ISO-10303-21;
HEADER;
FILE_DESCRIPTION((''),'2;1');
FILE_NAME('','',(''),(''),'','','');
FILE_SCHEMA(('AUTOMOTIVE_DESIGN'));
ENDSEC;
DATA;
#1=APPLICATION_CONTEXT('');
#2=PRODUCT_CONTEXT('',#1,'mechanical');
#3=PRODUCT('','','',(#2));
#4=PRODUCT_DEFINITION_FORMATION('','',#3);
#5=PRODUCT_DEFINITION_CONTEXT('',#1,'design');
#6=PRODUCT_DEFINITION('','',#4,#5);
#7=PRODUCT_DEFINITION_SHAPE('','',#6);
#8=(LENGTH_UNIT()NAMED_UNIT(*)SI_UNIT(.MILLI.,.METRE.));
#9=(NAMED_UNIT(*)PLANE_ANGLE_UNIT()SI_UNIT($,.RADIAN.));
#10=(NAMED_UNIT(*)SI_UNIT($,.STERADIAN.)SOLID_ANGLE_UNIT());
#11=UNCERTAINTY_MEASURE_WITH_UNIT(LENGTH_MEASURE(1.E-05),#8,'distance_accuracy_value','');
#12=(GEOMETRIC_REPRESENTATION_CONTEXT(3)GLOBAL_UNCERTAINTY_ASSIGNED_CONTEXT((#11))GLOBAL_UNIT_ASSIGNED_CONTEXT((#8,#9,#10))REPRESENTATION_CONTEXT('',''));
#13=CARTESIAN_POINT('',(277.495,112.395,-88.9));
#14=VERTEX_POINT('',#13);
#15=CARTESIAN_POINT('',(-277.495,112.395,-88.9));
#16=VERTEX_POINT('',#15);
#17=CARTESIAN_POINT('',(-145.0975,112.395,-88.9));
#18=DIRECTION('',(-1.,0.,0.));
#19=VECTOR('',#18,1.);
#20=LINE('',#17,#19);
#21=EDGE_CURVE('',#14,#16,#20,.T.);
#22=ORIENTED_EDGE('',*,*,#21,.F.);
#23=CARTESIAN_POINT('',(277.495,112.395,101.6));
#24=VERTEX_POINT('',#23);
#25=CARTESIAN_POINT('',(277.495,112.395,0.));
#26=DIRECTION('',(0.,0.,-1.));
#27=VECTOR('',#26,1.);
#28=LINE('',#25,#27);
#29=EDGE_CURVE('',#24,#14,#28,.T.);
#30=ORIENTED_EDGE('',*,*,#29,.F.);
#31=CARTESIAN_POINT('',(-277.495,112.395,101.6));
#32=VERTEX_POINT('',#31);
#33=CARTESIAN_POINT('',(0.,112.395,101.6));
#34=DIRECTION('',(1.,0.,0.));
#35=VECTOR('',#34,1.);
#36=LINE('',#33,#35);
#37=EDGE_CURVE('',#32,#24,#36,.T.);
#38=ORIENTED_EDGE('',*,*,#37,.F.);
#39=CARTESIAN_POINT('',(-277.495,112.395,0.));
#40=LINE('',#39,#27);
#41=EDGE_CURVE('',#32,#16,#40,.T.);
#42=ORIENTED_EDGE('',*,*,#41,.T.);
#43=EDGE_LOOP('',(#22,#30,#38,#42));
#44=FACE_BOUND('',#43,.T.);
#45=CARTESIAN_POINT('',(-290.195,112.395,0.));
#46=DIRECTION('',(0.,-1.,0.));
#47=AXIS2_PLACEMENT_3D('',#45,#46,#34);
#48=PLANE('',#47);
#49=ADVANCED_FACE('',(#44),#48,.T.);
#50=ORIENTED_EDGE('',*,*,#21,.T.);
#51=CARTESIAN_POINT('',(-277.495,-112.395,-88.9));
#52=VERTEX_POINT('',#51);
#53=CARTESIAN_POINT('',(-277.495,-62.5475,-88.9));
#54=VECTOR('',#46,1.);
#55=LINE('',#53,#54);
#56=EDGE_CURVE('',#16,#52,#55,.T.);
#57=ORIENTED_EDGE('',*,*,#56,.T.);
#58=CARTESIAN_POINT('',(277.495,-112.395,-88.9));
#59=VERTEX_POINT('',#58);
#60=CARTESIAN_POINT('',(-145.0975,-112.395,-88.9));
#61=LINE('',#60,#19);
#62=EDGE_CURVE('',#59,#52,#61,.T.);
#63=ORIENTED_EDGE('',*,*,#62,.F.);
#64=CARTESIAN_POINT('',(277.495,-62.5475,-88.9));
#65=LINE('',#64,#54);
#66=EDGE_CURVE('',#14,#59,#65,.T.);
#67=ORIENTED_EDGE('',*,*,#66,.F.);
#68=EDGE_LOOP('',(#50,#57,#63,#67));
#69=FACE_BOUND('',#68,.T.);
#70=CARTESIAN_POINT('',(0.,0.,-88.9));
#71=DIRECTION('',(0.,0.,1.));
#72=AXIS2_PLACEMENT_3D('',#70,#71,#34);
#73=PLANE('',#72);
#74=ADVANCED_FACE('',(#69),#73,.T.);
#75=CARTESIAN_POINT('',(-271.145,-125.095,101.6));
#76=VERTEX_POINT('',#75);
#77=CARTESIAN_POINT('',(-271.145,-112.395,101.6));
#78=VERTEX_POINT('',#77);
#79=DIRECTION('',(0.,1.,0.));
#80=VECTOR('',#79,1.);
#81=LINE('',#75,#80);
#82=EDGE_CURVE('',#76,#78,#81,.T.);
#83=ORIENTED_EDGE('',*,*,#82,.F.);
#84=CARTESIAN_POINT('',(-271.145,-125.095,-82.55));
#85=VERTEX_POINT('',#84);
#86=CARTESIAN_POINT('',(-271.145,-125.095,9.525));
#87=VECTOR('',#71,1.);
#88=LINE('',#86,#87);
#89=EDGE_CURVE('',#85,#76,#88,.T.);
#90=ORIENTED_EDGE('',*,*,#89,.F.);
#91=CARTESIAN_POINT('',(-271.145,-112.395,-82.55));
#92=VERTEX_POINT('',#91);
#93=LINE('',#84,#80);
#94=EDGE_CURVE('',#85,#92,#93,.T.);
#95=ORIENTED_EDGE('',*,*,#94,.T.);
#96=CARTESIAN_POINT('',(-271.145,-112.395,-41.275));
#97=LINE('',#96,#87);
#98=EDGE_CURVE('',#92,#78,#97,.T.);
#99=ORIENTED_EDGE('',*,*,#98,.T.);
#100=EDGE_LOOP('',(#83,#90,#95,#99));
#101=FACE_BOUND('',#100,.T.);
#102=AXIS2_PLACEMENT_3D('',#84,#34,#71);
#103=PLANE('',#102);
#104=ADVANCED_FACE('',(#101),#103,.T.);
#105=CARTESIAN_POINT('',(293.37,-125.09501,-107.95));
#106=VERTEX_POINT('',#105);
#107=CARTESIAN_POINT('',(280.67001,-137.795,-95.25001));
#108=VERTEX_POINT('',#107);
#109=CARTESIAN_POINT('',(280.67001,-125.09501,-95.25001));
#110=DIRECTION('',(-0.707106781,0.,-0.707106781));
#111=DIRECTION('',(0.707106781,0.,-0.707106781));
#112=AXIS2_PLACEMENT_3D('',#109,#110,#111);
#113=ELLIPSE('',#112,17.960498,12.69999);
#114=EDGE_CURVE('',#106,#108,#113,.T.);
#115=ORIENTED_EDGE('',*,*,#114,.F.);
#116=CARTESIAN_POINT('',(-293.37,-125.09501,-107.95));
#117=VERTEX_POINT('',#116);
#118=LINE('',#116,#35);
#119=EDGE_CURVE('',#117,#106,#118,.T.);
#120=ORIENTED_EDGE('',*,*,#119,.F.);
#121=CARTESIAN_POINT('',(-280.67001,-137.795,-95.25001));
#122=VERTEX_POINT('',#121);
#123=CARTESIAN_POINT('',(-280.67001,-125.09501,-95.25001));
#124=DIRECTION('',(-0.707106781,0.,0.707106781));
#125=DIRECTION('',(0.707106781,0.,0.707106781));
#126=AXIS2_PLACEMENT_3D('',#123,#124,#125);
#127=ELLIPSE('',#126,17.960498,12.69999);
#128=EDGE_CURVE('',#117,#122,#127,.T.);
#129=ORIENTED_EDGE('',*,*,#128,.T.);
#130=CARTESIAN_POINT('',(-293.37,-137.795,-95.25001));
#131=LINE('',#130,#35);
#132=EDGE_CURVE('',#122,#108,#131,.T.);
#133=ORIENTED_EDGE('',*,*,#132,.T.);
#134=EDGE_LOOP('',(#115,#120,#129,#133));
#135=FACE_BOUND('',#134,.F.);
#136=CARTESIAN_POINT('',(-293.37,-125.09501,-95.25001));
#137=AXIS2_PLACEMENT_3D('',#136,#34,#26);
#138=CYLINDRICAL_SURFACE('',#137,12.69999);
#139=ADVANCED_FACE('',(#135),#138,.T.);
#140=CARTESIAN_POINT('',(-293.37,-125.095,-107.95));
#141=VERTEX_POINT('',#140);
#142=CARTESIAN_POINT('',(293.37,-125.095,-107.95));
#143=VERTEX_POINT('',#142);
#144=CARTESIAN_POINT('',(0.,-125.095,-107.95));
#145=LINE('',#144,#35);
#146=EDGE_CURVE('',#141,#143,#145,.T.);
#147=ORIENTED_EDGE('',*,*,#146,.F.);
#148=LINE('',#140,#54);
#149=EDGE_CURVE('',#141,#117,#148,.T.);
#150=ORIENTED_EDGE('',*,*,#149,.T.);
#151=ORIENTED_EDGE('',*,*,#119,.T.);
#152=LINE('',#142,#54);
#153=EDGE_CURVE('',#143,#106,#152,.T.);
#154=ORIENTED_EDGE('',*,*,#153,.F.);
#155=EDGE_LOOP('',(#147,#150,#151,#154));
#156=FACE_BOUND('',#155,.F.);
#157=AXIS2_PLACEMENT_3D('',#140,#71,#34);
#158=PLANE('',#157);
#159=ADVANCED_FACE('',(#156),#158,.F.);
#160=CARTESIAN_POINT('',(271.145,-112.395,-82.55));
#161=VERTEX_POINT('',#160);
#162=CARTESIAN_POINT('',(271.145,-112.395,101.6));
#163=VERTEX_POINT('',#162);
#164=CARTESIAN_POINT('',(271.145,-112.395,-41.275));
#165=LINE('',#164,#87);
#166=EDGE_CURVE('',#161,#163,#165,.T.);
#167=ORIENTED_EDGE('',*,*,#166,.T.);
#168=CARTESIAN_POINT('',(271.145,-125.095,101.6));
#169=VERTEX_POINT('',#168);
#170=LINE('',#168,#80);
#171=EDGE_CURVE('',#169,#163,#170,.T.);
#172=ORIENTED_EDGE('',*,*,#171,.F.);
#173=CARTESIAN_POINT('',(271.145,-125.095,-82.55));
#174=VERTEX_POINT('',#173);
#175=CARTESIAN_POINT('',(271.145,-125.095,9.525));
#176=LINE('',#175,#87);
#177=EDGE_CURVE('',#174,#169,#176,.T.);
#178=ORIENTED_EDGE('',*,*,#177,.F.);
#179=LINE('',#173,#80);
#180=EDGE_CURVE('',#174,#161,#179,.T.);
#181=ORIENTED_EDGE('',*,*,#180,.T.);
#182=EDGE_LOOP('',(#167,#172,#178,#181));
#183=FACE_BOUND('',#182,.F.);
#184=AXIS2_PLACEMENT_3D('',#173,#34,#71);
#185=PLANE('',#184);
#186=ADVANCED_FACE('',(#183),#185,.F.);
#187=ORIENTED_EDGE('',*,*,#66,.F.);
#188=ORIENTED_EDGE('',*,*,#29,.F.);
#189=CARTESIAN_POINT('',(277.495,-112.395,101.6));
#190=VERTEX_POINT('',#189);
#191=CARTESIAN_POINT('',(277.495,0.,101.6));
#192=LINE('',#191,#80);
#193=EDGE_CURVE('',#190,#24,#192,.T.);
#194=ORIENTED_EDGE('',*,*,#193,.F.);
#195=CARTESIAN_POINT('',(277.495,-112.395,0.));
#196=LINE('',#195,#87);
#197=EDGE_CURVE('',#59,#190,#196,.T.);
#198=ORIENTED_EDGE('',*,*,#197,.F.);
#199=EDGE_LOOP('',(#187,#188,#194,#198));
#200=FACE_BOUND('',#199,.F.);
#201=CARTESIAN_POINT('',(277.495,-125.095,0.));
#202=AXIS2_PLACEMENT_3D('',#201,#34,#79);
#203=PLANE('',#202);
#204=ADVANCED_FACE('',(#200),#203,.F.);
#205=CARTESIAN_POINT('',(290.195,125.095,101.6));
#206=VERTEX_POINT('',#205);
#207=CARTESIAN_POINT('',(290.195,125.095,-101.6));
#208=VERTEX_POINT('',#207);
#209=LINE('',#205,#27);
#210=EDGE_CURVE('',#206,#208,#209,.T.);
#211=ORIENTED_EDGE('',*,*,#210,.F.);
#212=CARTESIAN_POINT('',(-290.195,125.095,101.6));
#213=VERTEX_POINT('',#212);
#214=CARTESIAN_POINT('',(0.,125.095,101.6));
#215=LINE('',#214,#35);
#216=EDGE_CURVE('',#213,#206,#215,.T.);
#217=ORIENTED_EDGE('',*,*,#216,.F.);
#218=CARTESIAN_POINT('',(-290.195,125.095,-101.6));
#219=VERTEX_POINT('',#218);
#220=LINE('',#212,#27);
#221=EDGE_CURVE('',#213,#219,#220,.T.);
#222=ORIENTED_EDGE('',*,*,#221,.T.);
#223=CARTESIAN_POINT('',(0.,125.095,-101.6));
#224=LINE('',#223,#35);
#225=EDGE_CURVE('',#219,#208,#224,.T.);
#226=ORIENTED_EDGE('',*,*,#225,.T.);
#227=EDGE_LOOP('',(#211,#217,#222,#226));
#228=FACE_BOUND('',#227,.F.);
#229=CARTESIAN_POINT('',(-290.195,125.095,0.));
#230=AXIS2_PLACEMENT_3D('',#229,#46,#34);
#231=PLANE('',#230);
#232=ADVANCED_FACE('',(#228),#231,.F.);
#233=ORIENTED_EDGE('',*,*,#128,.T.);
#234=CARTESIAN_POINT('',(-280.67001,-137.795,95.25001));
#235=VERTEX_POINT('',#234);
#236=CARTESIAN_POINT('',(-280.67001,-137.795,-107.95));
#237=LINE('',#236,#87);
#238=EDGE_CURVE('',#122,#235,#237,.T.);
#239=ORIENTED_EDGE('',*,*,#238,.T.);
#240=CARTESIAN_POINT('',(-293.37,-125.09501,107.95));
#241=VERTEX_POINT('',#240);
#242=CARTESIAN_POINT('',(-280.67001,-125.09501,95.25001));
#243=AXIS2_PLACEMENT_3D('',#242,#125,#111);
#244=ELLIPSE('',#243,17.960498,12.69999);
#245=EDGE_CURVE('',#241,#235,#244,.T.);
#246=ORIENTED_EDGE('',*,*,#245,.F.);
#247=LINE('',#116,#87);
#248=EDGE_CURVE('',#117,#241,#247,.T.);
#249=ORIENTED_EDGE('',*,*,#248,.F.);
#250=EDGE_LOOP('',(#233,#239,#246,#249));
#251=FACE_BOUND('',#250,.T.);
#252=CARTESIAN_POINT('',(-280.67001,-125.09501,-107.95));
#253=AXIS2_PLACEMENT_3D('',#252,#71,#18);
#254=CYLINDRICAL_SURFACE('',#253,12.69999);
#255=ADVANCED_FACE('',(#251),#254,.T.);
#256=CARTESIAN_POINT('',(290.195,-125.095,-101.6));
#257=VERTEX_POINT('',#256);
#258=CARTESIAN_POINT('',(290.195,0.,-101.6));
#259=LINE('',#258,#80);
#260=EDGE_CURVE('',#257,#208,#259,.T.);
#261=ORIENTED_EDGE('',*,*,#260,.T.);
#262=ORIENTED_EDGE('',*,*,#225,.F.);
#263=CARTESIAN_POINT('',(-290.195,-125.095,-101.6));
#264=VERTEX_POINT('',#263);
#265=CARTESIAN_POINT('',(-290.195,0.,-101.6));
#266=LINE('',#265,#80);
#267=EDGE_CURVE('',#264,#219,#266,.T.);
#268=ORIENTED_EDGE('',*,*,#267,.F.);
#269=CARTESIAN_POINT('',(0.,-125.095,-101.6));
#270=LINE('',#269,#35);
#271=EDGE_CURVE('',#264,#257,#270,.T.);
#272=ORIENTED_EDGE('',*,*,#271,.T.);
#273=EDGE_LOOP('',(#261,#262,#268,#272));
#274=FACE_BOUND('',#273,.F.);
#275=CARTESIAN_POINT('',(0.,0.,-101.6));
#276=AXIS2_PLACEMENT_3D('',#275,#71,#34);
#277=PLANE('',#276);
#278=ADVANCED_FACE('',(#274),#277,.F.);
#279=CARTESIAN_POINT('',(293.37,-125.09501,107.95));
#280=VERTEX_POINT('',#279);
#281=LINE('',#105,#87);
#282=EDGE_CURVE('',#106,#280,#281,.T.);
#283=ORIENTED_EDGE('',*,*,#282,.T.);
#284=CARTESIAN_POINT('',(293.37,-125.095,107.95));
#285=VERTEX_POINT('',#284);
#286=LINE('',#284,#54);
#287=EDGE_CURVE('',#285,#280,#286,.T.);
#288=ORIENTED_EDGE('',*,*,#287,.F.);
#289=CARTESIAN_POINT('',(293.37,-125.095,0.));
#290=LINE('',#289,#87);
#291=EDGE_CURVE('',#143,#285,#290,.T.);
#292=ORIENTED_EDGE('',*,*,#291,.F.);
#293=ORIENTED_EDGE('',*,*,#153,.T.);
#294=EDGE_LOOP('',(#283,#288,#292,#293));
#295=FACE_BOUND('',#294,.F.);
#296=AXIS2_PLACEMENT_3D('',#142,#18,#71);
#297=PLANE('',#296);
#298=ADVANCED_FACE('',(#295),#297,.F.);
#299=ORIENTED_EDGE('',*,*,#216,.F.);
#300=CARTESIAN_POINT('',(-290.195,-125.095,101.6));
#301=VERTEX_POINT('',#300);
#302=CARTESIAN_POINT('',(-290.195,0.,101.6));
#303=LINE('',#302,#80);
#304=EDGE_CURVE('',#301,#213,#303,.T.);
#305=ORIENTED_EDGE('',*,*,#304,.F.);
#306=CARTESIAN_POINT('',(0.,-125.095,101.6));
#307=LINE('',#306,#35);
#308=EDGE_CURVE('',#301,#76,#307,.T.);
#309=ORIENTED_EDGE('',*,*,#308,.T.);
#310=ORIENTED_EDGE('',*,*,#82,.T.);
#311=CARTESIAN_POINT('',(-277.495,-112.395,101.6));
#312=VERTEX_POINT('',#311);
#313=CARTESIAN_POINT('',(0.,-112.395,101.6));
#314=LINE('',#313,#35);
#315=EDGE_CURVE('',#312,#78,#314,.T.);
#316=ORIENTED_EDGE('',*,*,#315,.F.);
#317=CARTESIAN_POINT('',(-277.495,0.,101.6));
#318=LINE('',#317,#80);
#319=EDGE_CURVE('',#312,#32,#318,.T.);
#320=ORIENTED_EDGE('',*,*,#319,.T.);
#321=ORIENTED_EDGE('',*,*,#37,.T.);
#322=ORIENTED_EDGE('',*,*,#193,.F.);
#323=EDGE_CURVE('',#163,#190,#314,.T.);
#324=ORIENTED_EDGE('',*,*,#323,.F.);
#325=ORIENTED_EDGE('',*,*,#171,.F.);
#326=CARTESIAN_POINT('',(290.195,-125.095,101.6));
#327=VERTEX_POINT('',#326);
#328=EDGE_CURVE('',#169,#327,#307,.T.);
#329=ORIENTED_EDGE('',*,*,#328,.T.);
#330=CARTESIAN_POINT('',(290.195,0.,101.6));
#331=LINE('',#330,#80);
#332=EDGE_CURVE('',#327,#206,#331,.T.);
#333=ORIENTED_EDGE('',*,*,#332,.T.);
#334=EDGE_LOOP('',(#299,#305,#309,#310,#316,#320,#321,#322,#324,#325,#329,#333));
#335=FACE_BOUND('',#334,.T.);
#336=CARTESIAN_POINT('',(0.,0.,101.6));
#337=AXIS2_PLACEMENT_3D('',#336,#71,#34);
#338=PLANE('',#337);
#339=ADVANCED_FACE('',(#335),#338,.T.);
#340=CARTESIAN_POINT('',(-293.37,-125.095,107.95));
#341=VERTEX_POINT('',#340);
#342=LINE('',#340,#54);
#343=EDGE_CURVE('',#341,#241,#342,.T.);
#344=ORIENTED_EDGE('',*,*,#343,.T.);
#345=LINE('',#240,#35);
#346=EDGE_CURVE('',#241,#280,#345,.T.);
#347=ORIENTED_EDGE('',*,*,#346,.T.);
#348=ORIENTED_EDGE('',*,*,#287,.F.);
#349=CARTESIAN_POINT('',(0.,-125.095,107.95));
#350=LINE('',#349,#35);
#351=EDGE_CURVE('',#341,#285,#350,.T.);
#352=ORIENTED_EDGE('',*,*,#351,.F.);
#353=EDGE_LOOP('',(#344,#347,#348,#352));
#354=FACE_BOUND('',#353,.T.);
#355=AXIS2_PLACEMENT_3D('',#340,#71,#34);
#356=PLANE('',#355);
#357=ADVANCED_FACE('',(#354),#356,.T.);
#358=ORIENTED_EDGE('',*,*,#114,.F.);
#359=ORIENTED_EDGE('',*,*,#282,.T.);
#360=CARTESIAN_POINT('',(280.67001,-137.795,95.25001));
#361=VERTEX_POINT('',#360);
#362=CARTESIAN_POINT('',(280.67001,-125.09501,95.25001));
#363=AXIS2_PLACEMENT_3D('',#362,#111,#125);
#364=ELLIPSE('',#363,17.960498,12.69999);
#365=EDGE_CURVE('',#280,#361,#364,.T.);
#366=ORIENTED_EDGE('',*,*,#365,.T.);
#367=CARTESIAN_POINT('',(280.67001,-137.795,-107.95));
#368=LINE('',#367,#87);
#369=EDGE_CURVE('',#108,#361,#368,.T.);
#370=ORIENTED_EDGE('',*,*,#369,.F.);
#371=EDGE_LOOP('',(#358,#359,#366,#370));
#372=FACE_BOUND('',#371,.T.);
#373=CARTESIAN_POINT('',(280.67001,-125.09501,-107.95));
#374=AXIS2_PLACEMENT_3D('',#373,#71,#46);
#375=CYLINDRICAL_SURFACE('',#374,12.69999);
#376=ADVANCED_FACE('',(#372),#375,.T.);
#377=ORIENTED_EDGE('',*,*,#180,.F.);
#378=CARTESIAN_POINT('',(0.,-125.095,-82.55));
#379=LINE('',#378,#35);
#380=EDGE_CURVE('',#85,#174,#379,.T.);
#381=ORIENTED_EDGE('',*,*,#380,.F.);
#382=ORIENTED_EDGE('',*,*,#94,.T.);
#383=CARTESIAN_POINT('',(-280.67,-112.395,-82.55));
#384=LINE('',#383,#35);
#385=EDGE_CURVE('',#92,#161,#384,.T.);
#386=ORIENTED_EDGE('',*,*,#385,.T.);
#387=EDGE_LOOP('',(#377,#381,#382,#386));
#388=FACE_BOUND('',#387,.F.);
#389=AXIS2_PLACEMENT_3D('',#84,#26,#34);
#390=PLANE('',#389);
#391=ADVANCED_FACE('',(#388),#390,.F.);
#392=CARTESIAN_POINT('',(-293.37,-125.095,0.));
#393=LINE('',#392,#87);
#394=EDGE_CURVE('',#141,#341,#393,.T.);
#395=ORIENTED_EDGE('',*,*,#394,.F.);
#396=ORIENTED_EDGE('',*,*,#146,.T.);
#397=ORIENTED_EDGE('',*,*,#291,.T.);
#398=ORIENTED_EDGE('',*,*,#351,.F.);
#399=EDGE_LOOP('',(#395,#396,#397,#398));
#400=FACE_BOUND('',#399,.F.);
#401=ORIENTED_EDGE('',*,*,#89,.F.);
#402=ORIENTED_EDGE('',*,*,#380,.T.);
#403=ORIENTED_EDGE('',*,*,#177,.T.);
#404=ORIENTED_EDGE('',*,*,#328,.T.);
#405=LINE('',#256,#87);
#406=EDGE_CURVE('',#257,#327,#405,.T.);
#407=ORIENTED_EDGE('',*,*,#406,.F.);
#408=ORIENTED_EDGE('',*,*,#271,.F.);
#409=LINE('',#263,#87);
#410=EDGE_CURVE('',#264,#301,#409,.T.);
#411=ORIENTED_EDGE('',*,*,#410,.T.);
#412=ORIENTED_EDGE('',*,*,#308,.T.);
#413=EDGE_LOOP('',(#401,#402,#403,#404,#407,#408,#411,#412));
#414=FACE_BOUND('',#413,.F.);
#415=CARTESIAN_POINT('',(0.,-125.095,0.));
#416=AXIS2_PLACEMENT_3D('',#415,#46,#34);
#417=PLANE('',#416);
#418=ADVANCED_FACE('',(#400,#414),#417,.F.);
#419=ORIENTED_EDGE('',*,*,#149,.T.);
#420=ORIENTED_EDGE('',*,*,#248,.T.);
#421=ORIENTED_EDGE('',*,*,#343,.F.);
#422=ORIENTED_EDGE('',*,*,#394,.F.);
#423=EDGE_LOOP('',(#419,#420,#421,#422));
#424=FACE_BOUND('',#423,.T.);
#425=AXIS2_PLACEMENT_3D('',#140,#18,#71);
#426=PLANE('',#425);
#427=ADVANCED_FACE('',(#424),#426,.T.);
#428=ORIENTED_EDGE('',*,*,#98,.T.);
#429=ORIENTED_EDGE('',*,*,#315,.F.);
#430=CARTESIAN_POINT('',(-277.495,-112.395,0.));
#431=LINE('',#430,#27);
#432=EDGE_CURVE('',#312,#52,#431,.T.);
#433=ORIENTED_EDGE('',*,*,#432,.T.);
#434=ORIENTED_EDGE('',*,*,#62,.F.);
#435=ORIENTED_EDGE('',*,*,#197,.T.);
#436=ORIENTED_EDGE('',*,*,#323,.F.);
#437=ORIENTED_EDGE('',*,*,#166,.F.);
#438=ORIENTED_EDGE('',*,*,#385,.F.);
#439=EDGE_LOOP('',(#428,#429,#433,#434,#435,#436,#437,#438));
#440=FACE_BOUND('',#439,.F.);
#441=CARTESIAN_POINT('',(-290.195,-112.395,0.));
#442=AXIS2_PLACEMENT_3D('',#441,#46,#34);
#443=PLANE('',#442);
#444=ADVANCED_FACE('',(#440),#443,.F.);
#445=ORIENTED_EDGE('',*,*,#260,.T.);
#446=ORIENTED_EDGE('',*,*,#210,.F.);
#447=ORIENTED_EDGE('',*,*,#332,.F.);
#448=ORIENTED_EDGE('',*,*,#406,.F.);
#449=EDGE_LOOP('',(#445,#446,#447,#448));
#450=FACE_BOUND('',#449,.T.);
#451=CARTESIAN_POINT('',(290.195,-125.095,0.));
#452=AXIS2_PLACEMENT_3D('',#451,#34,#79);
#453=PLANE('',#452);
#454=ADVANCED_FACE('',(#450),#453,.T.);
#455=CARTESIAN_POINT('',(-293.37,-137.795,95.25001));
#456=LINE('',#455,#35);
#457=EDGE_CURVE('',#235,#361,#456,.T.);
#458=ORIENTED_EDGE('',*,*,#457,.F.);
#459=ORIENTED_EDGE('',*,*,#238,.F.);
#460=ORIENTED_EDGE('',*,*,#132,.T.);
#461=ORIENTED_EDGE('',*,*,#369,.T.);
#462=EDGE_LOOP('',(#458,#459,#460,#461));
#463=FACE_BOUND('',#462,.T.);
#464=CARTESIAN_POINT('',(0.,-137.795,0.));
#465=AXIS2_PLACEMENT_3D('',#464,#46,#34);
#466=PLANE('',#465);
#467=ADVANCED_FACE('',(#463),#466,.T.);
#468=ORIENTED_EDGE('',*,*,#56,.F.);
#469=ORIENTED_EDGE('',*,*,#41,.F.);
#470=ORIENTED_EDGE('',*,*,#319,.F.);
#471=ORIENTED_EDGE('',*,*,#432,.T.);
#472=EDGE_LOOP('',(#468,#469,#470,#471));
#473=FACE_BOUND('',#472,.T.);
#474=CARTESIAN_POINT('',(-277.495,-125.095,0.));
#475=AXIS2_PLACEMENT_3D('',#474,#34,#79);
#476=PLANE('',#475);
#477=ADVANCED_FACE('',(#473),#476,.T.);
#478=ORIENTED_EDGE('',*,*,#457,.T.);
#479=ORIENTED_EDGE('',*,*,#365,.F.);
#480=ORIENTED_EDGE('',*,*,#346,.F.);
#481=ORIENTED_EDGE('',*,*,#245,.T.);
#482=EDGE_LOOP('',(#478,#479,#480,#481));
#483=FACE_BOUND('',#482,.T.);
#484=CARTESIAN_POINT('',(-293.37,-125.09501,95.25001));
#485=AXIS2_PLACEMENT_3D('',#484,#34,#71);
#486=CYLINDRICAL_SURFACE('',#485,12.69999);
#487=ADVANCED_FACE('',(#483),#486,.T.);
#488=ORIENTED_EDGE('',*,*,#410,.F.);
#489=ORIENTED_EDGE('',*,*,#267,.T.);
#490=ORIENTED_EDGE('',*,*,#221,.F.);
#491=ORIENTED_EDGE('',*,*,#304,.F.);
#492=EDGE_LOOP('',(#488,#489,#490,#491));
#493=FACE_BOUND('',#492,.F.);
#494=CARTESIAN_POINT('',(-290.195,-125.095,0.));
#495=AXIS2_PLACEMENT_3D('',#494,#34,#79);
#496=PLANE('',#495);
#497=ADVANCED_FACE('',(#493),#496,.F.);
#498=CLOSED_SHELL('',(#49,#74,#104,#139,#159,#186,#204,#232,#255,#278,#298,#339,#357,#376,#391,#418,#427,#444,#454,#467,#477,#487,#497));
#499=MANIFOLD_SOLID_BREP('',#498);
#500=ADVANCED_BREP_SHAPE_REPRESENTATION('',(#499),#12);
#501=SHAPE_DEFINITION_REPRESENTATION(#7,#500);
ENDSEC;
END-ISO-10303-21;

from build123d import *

# Parameters (mm, degrees)
F0_W     = 580.39
F0_H     = 250.19
F1_DEPTH = 101.6
F2_T     = -12.7
F3_W     = 542.29
F3_H     = 184.15
F4_DEPTH = 25.4
F5_W     = 586.74
F5_H     = 215.9
F6_DEPTH = 12.7
F7_R     = 12.69999


# Not quite as in the source:
# - a fillet or chamfer is up to 0.001 mm smaller than in the source, because OpenCascade refuses the exact size


with BuildPart() as f1:
    # F0 (on Top) → F1 (new body, symmetric)
    with BuildSketch(Plane.XY):
        Rectangle(F0_W, F0_H)
    extrude(amount=F1_DEPTH, both=True)

    # F2
    f2_openings = [f1.faces().sort_by_distance(p)[0] for p in [
        (0, 0, 101.6),
    ]]
    offset(amount=F2_T, openings=f2_openings)

    # F3 (on face) → F4 (cut)
    with BuildSketch(Plane.XZ.offset(125.095)):
        with Locations((0, 9.525)):
            Rectangle(F3_W, F3_H)
    extrude(amount=-F4_DEPTH, mode=Mode.SUBTRACT)

    # F5 (on face) → F6 (join)
    with BuildSketch(Plane.XZ.offset(125.095)):
        Rectangle(F5_W, F5_H)
        Polygon((-290.195, -101.6), (-290.195, 101.6), (-271.145, 101.6), (-271.145, -82.55), (271.145, -82.55), (271.145, 101.6), (290.195, 101.6), (290.195, -101.6), align=None, mode=Mode.SUBTRACT)
        Polygon((-271.145, 101.6), (-290.195, 101.6), (-290.195, -101.6), (290.195, -101.6), (290.195, 101.6), (271.145, 101.6), (271.145, -82.55), (-271.145, -82.55), align=None)
    extrude(amount=F6_DEPTH)

    # F7 (radius 12.7 in the source; OpenCascade refuses exactly that, so slightly less here)
    f7_edges = [f1.edges().sort_by_distance(p)[0] for p in [
        (0, -137.795, 107.95),
        (-293.37, -137.795, 0),
        (0, -137.795, -107.95),
        (293.37, -137.795, 0),
    ]]
    fillet(f7_edges, radius=F7_R)


solid = f1.part
